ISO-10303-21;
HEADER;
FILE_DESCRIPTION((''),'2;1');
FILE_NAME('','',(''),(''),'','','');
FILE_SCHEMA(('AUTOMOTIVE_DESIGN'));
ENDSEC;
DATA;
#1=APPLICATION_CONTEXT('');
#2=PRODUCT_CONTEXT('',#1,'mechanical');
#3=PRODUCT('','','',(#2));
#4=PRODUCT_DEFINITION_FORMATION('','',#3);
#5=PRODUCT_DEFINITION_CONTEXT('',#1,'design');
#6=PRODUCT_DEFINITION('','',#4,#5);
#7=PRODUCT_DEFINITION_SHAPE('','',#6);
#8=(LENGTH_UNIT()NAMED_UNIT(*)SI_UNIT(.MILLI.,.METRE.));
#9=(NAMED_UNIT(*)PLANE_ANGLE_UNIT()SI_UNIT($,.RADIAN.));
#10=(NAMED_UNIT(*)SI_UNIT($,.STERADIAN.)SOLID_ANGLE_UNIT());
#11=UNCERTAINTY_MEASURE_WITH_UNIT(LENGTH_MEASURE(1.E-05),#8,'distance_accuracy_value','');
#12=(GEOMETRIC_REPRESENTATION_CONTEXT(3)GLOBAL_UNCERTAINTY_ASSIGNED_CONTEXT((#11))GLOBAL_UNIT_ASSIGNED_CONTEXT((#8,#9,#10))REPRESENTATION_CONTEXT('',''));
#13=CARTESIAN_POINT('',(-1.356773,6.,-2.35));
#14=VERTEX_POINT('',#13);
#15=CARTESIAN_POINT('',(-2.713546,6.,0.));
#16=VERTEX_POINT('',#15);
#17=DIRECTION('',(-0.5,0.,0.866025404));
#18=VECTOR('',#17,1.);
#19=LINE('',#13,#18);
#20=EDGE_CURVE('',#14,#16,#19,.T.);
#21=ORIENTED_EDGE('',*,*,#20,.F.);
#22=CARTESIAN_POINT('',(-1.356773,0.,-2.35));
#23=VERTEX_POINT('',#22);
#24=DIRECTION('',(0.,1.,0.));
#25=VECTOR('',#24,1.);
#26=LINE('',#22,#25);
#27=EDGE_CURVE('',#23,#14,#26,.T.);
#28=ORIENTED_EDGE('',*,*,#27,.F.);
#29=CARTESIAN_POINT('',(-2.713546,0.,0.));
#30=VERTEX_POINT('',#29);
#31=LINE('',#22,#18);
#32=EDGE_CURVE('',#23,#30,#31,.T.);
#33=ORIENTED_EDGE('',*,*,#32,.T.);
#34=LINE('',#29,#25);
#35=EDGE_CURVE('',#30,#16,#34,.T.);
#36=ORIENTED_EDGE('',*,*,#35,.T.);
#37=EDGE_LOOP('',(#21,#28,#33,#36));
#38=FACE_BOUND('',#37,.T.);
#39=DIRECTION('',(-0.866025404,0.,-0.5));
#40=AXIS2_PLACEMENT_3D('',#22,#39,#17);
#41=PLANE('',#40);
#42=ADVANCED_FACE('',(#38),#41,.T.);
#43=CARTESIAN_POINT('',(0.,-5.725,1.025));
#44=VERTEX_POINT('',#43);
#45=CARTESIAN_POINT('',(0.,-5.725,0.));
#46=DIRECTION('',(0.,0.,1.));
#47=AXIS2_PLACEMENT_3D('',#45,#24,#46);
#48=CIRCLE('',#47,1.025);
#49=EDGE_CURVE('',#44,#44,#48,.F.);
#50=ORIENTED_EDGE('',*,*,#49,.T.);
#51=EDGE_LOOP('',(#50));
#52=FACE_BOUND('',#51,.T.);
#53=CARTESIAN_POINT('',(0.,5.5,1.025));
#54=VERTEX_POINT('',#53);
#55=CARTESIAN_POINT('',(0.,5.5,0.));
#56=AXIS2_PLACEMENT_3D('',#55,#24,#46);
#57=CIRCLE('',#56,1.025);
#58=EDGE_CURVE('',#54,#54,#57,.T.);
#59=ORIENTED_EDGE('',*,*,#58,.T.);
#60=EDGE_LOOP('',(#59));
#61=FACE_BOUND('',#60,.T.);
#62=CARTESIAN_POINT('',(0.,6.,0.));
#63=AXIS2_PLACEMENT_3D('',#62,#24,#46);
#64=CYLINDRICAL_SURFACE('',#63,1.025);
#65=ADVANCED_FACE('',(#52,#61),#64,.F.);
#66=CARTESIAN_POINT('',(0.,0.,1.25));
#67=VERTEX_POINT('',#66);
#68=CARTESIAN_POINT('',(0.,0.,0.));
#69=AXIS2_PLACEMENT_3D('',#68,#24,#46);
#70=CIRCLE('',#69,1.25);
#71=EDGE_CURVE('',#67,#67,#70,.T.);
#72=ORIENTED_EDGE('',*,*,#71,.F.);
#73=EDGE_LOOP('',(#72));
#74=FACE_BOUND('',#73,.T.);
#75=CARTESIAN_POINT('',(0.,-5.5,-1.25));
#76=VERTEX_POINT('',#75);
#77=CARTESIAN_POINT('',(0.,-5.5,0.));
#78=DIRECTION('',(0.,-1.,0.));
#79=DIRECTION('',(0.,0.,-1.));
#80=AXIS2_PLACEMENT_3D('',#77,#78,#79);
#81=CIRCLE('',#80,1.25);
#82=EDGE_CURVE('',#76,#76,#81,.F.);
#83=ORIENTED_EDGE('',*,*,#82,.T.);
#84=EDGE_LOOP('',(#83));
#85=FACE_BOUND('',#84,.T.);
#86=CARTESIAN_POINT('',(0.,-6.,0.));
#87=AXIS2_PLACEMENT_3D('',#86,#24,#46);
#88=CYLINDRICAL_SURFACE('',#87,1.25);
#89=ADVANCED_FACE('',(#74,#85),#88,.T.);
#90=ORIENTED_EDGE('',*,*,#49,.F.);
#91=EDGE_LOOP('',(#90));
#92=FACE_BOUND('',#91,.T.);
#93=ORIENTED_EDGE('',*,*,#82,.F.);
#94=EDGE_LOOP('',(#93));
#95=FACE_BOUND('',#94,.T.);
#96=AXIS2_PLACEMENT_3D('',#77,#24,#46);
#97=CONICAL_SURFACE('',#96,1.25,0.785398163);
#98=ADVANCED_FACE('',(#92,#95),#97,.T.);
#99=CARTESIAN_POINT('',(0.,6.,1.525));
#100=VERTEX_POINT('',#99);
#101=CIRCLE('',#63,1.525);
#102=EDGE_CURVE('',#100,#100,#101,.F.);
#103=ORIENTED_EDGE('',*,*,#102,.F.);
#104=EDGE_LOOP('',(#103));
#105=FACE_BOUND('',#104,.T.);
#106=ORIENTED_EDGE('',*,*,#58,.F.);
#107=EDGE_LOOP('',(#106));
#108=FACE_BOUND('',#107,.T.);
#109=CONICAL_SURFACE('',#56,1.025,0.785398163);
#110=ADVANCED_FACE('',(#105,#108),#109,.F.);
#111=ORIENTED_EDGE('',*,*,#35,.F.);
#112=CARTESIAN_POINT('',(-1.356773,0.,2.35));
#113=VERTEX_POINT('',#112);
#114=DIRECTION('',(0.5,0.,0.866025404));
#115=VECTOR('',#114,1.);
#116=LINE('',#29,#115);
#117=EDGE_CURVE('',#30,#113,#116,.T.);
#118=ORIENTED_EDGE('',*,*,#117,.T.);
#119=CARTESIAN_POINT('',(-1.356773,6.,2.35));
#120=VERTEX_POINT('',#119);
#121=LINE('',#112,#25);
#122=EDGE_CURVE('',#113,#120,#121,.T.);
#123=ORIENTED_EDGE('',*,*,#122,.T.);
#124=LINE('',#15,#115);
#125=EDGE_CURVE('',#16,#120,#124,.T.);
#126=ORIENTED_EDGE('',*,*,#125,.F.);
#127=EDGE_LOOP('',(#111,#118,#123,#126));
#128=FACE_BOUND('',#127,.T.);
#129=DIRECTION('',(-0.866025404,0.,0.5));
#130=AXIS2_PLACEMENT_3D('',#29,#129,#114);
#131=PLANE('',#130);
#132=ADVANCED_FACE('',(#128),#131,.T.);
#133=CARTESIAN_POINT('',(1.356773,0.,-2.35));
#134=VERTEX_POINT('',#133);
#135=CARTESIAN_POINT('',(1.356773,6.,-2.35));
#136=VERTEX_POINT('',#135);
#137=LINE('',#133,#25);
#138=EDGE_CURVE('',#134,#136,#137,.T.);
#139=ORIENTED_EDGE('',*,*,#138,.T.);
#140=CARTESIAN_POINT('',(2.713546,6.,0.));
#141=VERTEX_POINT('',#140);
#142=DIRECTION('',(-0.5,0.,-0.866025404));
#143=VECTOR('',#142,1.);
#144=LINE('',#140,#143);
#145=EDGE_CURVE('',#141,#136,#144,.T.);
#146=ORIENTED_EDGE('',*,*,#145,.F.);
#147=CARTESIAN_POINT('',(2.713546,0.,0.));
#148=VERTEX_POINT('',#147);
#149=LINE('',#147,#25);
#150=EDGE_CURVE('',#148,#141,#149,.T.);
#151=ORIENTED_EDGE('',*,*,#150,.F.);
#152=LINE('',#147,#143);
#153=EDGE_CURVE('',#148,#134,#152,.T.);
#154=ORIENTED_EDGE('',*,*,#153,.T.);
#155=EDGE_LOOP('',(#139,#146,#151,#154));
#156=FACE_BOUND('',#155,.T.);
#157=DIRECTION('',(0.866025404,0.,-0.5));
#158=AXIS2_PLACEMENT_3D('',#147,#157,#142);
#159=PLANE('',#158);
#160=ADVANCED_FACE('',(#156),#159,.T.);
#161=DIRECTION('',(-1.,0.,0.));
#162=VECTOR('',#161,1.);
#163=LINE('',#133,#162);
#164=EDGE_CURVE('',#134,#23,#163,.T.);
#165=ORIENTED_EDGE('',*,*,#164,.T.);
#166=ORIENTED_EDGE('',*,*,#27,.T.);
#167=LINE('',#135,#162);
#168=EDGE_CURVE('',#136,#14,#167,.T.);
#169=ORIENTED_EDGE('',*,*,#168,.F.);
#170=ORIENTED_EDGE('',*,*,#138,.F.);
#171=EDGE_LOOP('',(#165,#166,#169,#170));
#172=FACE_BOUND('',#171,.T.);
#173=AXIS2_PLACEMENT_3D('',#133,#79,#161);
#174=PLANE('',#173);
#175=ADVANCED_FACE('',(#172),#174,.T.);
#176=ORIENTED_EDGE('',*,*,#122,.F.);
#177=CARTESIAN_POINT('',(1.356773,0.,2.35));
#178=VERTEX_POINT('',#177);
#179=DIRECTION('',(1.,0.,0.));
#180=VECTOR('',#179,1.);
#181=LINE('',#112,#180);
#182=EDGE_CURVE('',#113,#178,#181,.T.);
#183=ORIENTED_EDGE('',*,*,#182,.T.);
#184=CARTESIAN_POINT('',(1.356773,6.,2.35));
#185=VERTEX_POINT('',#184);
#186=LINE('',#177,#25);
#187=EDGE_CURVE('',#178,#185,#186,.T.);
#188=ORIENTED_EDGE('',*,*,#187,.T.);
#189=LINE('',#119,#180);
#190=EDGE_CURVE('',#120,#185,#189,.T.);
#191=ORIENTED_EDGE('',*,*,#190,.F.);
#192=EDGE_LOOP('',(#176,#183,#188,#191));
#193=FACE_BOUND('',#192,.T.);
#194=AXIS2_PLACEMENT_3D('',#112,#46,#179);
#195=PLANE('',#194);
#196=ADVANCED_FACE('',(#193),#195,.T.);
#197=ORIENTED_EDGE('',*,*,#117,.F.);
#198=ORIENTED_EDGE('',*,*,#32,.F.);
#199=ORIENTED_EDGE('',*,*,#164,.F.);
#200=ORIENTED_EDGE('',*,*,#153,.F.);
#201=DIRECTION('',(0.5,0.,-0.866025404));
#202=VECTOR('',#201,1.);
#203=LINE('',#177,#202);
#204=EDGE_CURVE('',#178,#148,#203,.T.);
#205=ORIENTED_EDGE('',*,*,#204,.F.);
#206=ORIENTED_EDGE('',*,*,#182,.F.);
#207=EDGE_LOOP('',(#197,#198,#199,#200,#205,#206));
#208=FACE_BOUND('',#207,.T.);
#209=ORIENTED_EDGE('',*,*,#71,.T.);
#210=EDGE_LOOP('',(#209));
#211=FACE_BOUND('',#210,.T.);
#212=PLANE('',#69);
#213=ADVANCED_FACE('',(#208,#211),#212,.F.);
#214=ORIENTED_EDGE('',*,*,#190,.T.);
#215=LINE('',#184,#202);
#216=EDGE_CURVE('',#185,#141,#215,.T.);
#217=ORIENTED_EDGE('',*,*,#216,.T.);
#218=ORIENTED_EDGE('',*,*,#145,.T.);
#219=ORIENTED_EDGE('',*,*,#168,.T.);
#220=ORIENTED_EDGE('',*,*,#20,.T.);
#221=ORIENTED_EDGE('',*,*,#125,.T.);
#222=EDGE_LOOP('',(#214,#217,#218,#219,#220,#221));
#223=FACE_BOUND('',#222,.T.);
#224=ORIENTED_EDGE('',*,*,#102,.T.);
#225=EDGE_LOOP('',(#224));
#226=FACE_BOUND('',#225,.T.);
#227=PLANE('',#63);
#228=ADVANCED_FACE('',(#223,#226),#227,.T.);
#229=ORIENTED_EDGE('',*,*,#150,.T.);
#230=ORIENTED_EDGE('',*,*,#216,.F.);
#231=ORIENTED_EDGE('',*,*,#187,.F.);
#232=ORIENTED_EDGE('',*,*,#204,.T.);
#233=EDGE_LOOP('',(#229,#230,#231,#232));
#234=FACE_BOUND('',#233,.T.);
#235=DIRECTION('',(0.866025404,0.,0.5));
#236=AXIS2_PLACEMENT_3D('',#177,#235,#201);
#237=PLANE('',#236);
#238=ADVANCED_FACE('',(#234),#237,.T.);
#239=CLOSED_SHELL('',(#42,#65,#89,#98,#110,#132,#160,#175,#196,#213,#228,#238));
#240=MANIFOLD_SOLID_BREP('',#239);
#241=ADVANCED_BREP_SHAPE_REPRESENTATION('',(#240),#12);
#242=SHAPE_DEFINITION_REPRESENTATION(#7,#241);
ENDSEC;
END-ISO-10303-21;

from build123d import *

# Parameters (mm, degrees)
BOSS_EXTRUDE1_DEPTH                = 6
SKETCH2_W                          = 1.25
SKETCH2_H                          = 6
TAP_DRILL_FOR_M2_5X0_45_TAP1_D     = 2.05
TAP_DRILL_FOR_M2_5X0_45_TAP1_DEPTH = 19
CHAMFER1_SIZE                      = 0.5


with BuildPart() as part:
    # Sketch1 → Boss-Extrude1 (new body)
    with BuildSketch(Plane(origin=(0, 6, 0), x_dir=(1, 0, 0), z_dir=(0, 1, 0))):
        Polygon((1.356773133, -2.35), (2.713546265, 0), (1.356773133, 2.35), (-1.356773133, 2.35), (-2.713546265, 0), (-1.356773133, -2.35), align=None)
    extrude(amount=-BOSS_EXTRUDE1_DEPTH)

    # Sketch2 → Revolve1 (revolve)
    with BuildSketch(Plane(origin=(0, 0, 0), x_dir=(-1, 0, 0), z_dir=(0, 0, -1)), mode=Mode.PRIVATE) as revolve1_sk:
        with Locations((-0.625, -3)):
            Rectangle(SKETCH2_W, SKETCH2_H)
    revolve(revolve1_sk.sketch.rotate(Axis((0, -6, 0), (0, 1, 0)), 270), axis=Axis((0, -6, 0), (0, 1, 0)))

    # Tap Drill for M2.5x0.45 Tap1
    with Locations(Plane(origin=(0, 6, 0), x_dir=(1, 0, 0), z_dir=(0, 1, 0))):
        with Locations((0, 0)):
            Hole(TAP_DRILL_FOR_M2_5X0_45_TAP1_D / 2, depth=TAP_DRILL_FOR_M2_5X0_45_TAP1_DEPTH)

    # Chamfer1
    # the kernel refuses this chamfer: 0.5 mm, written as the material it takes off along each edge
    with BuildSketch(Plane(origin=(0, -6, 0), x_dir=(0, 0, 1), z_dir=(-1, 0, 0))) as chamfer1_piece_1:
        Polygon((1.25, CHAMFER1_SIZE), (1.25 - CHAMFER1_SIZE, 0), (1.25, 0), align=None)
    revolve(axis=Axis((0, -6, 0), (0, 1, 0)), mode=Mode.SUBTRACT)
    with BuildSketch(Plane(origin=(0, 6, 0), x_dir=(-1, 0, 0), z_dir=(0, 0, 1))) as chamfer1_piece_2:
        Polygon((1.025 + CHAMFER1_SIZE, 0), (1.025, CHAMFER1_SIZE), (1.025, 0), align=None)
    revolve(axis=Axis((0, 6, 0), (0, -1, 0)), mode=Mode.SUBTRACT)


solid = part.part
